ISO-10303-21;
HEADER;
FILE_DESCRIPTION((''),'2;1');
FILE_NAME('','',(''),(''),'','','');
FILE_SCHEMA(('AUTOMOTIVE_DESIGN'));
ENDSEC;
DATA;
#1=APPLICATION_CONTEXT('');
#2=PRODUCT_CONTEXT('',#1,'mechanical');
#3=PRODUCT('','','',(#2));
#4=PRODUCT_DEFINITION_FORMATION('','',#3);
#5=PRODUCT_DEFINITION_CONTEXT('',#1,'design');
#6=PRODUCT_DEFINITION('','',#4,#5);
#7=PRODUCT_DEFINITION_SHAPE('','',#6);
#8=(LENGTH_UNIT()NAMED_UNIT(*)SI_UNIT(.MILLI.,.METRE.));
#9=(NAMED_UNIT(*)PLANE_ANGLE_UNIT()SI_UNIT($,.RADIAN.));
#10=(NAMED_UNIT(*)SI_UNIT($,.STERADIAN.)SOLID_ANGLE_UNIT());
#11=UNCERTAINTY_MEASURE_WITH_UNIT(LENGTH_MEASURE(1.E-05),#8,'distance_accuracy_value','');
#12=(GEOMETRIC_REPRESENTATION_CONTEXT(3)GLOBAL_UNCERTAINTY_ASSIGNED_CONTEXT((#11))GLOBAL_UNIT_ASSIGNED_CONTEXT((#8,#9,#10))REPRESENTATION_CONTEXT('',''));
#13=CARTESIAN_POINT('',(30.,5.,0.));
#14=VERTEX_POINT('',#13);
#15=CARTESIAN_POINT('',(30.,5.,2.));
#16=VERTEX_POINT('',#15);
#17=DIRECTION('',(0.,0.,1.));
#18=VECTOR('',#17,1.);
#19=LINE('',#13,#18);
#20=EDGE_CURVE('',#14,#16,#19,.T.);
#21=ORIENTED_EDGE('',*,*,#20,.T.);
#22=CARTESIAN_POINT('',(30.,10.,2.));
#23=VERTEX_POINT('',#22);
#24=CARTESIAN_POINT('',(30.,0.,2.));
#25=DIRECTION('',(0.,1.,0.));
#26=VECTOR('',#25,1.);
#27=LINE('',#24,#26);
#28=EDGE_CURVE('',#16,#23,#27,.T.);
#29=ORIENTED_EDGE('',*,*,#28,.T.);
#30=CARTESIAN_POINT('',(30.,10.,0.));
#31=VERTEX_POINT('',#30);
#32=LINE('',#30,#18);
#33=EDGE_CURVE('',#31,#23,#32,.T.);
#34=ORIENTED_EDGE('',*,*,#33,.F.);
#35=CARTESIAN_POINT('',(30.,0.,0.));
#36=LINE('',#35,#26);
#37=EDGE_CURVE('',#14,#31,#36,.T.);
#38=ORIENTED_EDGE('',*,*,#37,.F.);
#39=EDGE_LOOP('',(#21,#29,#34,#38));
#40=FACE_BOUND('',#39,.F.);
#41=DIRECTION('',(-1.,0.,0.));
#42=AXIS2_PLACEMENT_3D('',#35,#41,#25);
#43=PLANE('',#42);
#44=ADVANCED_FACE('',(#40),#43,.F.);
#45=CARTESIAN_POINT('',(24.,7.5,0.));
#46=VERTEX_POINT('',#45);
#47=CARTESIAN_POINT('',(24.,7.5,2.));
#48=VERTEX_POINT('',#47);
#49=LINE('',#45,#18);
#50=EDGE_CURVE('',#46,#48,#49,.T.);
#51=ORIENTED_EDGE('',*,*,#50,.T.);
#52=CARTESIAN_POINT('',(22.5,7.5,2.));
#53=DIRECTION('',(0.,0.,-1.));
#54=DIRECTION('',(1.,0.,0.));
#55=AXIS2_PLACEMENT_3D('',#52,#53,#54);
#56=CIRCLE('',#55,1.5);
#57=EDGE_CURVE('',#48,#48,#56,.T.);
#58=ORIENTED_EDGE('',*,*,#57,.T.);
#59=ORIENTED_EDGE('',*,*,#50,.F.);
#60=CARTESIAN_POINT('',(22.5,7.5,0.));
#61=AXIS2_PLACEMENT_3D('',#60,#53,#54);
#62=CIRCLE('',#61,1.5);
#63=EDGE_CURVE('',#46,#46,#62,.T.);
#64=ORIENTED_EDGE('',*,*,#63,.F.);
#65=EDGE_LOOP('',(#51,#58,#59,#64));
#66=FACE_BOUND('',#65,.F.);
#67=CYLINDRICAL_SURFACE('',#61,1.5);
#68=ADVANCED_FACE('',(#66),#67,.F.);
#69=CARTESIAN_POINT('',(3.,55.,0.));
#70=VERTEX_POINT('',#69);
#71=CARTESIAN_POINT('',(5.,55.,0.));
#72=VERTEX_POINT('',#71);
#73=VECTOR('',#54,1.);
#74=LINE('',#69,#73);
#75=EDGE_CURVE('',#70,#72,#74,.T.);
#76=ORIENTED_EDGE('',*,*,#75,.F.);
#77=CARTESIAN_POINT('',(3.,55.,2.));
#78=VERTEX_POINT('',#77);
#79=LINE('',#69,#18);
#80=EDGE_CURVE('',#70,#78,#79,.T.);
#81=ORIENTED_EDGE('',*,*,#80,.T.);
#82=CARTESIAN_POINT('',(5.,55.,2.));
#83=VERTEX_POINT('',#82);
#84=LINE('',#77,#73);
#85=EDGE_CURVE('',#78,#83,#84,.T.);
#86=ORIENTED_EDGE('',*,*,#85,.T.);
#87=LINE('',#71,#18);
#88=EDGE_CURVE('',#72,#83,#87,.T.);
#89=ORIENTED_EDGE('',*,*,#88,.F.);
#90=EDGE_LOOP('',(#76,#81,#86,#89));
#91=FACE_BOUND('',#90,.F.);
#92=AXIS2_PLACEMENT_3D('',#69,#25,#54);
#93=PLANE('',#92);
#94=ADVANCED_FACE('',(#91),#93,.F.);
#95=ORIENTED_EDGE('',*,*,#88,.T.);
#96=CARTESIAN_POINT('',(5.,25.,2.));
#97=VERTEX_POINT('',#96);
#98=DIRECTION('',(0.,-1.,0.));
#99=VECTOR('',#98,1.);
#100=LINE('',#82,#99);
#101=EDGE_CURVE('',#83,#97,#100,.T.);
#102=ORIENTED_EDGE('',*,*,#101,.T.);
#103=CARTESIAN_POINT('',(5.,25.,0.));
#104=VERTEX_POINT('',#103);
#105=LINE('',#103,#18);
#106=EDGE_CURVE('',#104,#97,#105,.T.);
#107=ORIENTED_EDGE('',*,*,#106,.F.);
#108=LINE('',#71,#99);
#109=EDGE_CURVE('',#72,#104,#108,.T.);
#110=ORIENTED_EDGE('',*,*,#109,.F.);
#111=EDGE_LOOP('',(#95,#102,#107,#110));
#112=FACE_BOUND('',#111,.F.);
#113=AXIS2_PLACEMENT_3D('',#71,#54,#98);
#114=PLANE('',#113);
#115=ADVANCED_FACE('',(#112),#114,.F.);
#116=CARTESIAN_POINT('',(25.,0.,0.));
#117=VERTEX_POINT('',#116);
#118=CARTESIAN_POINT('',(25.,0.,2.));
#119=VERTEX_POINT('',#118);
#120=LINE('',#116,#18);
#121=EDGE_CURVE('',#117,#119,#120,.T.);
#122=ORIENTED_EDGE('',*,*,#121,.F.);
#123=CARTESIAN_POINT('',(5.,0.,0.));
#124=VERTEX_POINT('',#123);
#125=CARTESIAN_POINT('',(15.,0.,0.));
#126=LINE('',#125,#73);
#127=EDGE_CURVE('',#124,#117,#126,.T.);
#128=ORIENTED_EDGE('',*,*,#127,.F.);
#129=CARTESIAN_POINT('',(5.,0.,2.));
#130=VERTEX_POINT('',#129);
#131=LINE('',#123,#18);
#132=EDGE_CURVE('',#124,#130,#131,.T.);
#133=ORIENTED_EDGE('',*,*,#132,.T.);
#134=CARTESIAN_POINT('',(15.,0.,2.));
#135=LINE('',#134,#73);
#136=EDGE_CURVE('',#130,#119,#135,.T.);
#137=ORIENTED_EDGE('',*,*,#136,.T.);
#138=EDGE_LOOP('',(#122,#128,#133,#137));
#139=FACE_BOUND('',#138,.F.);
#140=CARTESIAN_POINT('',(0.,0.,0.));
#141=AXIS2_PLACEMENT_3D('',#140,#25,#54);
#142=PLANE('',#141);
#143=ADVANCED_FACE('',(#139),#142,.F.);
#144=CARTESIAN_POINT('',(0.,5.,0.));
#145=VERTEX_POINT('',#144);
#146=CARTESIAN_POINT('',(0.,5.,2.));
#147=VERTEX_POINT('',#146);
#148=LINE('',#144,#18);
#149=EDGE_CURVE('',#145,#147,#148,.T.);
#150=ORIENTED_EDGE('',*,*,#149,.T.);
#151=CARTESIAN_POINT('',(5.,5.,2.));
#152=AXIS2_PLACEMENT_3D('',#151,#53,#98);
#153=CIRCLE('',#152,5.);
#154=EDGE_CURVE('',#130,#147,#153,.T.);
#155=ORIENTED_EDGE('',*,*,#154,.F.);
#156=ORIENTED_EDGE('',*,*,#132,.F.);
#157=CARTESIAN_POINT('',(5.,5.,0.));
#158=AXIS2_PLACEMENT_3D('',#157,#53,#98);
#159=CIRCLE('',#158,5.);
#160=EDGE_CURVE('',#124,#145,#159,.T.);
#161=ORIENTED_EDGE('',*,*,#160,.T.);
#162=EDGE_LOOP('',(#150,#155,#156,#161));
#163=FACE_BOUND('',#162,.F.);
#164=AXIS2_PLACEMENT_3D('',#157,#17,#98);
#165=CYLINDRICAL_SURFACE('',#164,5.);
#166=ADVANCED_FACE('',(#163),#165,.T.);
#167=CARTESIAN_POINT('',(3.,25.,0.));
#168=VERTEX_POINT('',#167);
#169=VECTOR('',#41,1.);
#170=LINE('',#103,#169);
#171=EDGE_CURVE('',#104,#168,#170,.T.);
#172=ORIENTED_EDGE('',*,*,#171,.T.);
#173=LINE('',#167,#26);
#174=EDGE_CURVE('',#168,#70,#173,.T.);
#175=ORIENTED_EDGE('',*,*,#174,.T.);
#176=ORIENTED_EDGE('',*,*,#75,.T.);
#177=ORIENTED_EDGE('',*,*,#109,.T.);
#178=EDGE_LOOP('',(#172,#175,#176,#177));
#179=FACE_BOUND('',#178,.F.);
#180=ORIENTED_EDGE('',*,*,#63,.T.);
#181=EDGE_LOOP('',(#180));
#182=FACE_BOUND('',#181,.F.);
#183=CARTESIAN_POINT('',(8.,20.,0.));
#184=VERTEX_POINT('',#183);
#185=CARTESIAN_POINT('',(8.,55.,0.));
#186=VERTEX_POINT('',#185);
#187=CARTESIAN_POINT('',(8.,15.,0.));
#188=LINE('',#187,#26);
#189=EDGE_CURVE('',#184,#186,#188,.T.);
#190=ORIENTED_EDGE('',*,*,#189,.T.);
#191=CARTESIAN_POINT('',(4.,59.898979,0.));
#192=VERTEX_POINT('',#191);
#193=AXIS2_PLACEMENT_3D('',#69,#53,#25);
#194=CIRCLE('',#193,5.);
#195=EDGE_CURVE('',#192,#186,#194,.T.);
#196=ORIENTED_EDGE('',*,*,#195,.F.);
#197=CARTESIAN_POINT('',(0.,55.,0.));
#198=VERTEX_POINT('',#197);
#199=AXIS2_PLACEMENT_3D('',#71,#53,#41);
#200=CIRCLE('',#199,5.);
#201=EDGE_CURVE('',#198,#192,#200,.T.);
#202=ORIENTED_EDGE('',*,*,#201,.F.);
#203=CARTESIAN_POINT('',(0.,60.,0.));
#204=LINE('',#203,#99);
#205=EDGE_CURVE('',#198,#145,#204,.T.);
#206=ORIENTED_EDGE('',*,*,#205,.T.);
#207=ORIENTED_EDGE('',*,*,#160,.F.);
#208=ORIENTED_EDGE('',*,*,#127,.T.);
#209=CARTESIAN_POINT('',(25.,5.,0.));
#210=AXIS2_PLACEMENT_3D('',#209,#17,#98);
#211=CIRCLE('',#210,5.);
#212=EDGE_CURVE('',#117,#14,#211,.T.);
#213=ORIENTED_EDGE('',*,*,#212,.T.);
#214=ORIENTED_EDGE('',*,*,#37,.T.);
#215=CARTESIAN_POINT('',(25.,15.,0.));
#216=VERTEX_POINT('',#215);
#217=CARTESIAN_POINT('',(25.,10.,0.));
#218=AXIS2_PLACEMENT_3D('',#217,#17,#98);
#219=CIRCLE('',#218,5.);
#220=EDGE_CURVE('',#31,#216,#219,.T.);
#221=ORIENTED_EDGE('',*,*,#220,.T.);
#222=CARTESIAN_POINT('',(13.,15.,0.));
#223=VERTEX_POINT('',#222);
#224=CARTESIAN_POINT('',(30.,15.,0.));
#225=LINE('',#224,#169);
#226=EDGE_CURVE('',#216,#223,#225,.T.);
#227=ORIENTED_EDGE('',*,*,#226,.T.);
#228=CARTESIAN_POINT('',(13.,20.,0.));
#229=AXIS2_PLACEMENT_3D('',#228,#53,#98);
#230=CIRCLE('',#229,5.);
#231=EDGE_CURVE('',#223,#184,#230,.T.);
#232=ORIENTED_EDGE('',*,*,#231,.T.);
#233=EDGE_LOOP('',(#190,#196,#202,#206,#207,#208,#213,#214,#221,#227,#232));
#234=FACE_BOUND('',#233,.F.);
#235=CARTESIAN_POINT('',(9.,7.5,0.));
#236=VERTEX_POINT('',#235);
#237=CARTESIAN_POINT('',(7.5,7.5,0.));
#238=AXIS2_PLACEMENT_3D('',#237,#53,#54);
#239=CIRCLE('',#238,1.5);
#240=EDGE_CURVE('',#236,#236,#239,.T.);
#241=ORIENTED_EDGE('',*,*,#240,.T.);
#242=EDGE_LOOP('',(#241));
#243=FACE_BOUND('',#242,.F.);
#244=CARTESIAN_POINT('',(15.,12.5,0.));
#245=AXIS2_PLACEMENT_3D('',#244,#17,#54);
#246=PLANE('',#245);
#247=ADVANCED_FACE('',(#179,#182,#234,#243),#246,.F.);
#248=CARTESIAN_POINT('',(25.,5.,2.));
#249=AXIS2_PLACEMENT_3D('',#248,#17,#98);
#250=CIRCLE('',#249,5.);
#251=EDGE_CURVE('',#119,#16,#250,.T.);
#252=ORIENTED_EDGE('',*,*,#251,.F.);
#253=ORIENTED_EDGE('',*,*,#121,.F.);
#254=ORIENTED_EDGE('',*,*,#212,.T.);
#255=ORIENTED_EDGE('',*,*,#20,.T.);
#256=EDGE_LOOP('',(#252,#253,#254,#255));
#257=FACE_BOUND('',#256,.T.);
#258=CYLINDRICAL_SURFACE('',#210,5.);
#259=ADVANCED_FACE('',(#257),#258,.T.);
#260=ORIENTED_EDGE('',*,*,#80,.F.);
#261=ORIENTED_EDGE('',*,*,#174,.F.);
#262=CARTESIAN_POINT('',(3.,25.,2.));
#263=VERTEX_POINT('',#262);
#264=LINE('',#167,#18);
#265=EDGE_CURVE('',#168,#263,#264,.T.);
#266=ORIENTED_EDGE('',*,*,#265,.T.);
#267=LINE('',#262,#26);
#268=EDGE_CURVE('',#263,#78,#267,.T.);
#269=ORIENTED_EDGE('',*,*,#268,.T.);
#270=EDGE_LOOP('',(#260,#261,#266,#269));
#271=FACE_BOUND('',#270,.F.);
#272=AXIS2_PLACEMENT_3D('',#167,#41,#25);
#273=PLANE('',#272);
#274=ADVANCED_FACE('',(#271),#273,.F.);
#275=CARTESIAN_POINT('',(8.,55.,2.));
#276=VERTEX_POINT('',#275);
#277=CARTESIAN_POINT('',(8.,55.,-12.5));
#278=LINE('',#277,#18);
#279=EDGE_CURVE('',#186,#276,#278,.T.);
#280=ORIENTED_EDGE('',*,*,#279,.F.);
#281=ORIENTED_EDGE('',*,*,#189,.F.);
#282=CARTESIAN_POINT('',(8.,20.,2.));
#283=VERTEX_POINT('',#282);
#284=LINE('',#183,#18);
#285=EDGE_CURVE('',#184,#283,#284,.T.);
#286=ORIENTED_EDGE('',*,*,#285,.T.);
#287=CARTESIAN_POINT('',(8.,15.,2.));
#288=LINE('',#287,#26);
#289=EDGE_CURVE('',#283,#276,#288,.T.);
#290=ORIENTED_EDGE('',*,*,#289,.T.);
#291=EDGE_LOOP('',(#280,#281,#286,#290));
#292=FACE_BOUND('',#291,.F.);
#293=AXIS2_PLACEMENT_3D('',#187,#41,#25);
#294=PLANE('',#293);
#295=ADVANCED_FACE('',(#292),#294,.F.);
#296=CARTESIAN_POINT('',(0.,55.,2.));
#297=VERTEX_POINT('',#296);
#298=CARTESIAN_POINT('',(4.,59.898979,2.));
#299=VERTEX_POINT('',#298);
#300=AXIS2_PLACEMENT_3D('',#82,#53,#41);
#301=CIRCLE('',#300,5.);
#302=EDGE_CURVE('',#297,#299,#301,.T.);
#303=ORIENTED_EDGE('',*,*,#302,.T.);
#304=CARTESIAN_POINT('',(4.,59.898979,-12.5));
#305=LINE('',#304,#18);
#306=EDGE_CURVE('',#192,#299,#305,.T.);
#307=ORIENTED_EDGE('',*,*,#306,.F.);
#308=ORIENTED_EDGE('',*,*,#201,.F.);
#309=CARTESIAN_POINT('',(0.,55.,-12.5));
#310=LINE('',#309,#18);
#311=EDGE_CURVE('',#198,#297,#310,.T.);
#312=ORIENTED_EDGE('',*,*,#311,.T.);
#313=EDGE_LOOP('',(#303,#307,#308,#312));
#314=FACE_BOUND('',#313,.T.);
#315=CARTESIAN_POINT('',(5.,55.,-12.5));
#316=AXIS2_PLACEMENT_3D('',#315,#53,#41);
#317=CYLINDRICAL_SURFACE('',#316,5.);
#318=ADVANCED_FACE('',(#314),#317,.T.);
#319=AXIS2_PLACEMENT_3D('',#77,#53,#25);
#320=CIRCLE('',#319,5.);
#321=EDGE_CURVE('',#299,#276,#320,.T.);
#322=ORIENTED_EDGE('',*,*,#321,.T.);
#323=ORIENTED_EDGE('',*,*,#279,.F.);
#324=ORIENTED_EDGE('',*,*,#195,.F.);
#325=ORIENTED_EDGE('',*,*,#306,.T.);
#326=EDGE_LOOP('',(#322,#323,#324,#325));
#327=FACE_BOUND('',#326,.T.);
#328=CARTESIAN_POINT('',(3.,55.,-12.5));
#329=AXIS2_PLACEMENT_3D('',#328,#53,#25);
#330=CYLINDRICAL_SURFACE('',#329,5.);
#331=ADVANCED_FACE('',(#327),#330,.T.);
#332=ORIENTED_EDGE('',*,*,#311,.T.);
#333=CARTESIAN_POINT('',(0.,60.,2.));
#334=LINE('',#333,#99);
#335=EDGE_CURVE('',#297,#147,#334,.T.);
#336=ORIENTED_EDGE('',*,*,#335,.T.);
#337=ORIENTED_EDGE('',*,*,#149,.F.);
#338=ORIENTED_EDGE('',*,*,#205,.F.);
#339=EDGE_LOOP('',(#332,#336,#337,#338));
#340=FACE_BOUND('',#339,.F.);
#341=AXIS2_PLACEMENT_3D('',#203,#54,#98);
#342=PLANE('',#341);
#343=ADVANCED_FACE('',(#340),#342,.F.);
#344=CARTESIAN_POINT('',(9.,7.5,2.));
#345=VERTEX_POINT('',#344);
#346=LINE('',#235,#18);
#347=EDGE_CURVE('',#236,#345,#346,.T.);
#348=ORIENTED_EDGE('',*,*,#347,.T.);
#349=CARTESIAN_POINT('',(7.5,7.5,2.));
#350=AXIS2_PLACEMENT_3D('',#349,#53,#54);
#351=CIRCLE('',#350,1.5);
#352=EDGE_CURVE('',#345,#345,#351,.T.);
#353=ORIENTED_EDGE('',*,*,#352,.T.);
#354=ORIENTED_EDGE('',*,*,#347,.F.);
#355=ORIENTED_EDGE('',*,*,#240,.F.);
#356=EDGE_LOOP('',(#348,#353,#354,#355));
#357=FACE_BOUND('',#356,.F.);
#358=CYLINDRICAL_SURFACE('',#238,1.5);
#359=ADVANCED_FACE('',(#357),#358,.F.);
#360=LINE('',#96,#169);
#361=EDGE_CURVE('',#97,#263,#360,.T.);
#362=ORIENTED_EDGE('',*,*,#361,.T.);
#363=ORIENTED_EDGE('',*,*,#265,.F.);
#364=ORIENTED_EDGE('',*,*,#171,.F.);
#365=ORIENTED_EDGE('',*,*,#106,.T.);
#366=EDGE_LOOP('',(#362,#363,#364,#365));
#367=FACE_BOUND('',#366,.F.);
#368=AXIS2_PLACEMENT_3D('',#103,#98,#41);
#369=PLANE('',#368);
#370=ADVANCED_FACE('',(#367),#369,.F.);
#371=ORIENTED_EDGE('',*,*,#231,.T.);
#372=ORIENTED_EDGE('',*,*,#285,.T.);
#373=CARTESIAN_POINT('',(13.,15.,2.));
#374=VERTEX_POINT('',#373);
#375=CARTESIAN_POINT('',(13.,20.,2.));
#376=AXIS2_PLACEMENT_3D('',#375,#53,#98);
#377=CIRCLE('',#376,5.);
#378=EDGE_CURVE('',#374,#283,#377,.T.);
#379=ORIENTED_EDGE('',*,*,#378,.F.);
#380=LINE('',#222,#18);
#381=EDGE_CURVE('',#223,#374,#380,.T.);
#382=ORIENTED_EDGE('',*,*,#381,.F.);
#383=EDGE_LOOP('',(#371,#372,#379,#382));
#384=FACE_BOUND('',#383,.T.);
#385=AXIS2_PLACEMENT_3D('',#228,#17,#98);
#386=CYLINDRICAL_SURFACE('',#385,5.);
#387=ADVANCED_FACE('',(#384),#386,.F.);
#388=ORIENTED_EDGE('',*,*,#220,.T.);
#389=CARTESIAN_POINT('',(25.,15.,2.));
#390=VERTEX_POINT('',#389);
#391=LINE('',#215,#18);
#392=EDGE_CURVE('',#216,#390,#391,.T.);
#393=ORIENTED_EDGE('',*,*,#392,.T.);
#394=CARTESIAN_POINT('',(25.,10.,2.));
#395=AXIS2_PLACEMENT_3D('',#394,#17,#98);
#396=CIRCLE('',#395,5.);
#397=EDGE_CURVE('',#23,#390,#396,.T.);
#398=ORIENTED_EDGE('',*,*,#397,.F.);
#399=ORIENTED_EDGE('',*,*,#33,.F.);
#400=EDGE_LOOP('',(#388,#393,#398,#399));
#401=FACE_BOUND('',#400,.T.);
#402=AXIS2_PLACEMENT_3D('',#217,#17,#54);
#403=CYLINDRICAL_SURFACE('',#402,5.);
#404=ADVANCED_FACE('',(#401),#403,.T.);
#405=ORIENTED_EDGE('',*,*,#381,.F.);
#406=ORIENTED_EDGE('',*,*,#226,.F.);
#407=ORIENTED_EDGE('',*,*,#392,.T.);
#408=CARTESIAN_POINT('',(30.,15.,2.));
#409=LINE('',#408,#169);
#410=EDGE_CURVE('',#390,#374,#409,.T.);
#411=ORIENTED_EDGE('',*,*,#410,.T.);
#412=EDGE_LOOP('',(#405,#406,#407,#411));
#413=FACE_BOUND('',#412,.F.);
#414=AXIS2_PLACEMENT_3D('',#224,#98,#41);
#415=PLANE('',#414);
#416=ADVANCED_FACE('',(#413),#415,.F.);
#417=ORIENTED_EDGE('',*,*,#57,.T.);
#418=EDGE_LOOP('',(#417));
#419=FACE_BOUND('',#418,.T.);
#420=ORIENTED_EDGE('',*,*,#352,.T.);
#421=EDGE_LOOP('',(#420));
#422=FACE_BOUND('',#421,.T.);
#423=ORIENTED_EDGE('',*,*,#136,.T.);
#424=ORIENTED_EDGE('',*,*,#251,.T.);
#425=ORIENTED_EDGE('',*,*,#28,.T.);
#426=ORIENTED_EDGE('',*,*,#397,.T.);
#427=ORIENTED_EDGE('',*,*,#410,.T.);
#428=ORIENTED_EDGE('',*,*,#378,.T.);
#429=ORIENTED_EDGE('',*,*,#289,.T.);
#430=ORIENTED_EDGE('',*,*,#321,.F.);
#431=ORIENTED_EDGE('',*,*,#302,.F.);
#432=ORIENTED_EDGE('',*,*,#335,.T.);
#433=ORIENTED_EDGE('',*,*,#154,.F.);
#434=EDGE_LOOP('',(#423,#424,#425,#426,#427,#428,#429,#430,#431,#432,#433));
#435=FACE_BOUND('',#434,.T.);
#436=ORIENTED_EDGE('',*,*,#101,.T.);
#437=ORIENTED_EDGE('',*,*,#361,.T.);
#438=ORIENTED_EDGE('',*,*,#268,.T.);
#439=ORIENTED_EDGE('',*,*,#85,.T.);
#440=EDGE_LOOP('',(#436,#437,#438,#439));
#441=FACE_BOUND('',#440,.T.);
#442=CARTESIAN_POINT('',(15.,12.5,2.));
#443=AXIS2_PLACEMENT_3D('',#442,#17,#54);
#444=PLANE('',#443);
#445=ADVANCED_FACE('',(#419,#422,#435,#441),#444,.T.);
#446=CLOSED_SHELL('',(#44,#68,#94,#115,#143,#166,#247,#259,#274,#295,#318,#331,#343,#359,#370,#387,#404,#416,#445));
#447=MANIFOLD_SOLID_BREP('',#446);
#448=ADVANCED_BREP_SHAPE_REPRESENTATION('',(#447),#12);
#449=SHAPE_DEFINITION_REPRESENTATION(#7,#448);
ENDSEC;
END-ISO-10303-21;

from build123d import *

# Parameters (mm, degrees)
F0_W        = 30
F0_H        = 5
F1_DEPTH    = 2
F2_R        = 5
F3_T1_DEPTH = 27


# Not quite as in the source:
# - a fillet or chamfer that OpenCascade refuses, or shapes differently, is made with other operations: its cross-section is extruded or revolved along the edge and cut away or added
# - a feature names something its author has since deleted; it is built from what else it names


with BuildPart() as f1:
    # F0 (on Top) → F1 (new body)
    with BuildSketch(Plane.XY):
        Polygon((0, 15), (0, 10), (30, 10), (30, 15), (8, 15), (4, 15), align=None)
        with Locations((15, 2.5)):
            Rectangle(F0_W, F0_H)
        with BuildLine():
            Line((0, 7.5), (0, 5))
            Line((0, 5), (30, 5))
            Line((30, 5), (30, 7.5))
            Line((30, 7.5), (24, 7.5))
            ThreePointArc((24, 7.5), (22.5, 6), (21, 7.5))
            Line((21, 7.5), (15, 7.5))
            Line((15, 7.5), (9, 7.5))
            ThreePointArc((9, 7.5), (7.5, 6), (6, 7.5))
            Line((6, 7.5), (0, 7.5))
        make_face()
        with BuildLine():
            Line((0, 10), (0, 7.5))
            Line((0, 7.5), (6, 7.5))
            ThreePointArc((6, 7.5), (7.5, 9), (9, 7.5))
            Line((9, 7.5), (15, 7.5))
            Line((15, 7.5), (21, 7.5))
            ThreePointArc((21, 7.5), (22.5, 9), (24, 7.5))
            Line((24, 7.5), (30, 7.5))
            Line((30, 7.5), (30, 10))
            Line((30, 10), (0, 10))
        make_face()
        Polygon((0, 60), (0, 15), (4, 15), (8, 15), (8, 60), align=None)
        Polygon((5, 25), (4, 25), (3, 25), (3, 55), (5, 55), align=None, mode=Mode.SUBTRACT)
    extrude(amount=F1_DEPTH)

    # F2
    f2_edges = [f1.edges().sort_by_distance(p)[0] for p in [
        (8, 15, 1),
        (30, 15, 1),
        (30, 0, 1),
        (0, 0, 1),
    ]]
    fillet(f2_edges, radius=F2_R)

    # F3: fillet of radius 5 on 2 edges, made by hand

    # F3_s2 → F3_t1 (cut)
    with BuildSketch(Plane.XY.offset(-12.5)):
        with BuildLine():
            ThreePointArc((3, 60), (6.5355339059, 58.5355339059), (8, 55))
            Line((8, 55), (8, 60))
            Line((8, 60), (3, 60))
        make_face()
        with BuildLine():
            ThreePointArc((0, 55), (1.4644660941, 58.5355339059), (5, 60))
            Line((5, 60), (0, 60))
            Line((0, 60), (0, 55))
        make_face()
    extrude(amount=F3_T1_DEPTH, mode=Mode.SUBTRACT)


solid = f1.part
